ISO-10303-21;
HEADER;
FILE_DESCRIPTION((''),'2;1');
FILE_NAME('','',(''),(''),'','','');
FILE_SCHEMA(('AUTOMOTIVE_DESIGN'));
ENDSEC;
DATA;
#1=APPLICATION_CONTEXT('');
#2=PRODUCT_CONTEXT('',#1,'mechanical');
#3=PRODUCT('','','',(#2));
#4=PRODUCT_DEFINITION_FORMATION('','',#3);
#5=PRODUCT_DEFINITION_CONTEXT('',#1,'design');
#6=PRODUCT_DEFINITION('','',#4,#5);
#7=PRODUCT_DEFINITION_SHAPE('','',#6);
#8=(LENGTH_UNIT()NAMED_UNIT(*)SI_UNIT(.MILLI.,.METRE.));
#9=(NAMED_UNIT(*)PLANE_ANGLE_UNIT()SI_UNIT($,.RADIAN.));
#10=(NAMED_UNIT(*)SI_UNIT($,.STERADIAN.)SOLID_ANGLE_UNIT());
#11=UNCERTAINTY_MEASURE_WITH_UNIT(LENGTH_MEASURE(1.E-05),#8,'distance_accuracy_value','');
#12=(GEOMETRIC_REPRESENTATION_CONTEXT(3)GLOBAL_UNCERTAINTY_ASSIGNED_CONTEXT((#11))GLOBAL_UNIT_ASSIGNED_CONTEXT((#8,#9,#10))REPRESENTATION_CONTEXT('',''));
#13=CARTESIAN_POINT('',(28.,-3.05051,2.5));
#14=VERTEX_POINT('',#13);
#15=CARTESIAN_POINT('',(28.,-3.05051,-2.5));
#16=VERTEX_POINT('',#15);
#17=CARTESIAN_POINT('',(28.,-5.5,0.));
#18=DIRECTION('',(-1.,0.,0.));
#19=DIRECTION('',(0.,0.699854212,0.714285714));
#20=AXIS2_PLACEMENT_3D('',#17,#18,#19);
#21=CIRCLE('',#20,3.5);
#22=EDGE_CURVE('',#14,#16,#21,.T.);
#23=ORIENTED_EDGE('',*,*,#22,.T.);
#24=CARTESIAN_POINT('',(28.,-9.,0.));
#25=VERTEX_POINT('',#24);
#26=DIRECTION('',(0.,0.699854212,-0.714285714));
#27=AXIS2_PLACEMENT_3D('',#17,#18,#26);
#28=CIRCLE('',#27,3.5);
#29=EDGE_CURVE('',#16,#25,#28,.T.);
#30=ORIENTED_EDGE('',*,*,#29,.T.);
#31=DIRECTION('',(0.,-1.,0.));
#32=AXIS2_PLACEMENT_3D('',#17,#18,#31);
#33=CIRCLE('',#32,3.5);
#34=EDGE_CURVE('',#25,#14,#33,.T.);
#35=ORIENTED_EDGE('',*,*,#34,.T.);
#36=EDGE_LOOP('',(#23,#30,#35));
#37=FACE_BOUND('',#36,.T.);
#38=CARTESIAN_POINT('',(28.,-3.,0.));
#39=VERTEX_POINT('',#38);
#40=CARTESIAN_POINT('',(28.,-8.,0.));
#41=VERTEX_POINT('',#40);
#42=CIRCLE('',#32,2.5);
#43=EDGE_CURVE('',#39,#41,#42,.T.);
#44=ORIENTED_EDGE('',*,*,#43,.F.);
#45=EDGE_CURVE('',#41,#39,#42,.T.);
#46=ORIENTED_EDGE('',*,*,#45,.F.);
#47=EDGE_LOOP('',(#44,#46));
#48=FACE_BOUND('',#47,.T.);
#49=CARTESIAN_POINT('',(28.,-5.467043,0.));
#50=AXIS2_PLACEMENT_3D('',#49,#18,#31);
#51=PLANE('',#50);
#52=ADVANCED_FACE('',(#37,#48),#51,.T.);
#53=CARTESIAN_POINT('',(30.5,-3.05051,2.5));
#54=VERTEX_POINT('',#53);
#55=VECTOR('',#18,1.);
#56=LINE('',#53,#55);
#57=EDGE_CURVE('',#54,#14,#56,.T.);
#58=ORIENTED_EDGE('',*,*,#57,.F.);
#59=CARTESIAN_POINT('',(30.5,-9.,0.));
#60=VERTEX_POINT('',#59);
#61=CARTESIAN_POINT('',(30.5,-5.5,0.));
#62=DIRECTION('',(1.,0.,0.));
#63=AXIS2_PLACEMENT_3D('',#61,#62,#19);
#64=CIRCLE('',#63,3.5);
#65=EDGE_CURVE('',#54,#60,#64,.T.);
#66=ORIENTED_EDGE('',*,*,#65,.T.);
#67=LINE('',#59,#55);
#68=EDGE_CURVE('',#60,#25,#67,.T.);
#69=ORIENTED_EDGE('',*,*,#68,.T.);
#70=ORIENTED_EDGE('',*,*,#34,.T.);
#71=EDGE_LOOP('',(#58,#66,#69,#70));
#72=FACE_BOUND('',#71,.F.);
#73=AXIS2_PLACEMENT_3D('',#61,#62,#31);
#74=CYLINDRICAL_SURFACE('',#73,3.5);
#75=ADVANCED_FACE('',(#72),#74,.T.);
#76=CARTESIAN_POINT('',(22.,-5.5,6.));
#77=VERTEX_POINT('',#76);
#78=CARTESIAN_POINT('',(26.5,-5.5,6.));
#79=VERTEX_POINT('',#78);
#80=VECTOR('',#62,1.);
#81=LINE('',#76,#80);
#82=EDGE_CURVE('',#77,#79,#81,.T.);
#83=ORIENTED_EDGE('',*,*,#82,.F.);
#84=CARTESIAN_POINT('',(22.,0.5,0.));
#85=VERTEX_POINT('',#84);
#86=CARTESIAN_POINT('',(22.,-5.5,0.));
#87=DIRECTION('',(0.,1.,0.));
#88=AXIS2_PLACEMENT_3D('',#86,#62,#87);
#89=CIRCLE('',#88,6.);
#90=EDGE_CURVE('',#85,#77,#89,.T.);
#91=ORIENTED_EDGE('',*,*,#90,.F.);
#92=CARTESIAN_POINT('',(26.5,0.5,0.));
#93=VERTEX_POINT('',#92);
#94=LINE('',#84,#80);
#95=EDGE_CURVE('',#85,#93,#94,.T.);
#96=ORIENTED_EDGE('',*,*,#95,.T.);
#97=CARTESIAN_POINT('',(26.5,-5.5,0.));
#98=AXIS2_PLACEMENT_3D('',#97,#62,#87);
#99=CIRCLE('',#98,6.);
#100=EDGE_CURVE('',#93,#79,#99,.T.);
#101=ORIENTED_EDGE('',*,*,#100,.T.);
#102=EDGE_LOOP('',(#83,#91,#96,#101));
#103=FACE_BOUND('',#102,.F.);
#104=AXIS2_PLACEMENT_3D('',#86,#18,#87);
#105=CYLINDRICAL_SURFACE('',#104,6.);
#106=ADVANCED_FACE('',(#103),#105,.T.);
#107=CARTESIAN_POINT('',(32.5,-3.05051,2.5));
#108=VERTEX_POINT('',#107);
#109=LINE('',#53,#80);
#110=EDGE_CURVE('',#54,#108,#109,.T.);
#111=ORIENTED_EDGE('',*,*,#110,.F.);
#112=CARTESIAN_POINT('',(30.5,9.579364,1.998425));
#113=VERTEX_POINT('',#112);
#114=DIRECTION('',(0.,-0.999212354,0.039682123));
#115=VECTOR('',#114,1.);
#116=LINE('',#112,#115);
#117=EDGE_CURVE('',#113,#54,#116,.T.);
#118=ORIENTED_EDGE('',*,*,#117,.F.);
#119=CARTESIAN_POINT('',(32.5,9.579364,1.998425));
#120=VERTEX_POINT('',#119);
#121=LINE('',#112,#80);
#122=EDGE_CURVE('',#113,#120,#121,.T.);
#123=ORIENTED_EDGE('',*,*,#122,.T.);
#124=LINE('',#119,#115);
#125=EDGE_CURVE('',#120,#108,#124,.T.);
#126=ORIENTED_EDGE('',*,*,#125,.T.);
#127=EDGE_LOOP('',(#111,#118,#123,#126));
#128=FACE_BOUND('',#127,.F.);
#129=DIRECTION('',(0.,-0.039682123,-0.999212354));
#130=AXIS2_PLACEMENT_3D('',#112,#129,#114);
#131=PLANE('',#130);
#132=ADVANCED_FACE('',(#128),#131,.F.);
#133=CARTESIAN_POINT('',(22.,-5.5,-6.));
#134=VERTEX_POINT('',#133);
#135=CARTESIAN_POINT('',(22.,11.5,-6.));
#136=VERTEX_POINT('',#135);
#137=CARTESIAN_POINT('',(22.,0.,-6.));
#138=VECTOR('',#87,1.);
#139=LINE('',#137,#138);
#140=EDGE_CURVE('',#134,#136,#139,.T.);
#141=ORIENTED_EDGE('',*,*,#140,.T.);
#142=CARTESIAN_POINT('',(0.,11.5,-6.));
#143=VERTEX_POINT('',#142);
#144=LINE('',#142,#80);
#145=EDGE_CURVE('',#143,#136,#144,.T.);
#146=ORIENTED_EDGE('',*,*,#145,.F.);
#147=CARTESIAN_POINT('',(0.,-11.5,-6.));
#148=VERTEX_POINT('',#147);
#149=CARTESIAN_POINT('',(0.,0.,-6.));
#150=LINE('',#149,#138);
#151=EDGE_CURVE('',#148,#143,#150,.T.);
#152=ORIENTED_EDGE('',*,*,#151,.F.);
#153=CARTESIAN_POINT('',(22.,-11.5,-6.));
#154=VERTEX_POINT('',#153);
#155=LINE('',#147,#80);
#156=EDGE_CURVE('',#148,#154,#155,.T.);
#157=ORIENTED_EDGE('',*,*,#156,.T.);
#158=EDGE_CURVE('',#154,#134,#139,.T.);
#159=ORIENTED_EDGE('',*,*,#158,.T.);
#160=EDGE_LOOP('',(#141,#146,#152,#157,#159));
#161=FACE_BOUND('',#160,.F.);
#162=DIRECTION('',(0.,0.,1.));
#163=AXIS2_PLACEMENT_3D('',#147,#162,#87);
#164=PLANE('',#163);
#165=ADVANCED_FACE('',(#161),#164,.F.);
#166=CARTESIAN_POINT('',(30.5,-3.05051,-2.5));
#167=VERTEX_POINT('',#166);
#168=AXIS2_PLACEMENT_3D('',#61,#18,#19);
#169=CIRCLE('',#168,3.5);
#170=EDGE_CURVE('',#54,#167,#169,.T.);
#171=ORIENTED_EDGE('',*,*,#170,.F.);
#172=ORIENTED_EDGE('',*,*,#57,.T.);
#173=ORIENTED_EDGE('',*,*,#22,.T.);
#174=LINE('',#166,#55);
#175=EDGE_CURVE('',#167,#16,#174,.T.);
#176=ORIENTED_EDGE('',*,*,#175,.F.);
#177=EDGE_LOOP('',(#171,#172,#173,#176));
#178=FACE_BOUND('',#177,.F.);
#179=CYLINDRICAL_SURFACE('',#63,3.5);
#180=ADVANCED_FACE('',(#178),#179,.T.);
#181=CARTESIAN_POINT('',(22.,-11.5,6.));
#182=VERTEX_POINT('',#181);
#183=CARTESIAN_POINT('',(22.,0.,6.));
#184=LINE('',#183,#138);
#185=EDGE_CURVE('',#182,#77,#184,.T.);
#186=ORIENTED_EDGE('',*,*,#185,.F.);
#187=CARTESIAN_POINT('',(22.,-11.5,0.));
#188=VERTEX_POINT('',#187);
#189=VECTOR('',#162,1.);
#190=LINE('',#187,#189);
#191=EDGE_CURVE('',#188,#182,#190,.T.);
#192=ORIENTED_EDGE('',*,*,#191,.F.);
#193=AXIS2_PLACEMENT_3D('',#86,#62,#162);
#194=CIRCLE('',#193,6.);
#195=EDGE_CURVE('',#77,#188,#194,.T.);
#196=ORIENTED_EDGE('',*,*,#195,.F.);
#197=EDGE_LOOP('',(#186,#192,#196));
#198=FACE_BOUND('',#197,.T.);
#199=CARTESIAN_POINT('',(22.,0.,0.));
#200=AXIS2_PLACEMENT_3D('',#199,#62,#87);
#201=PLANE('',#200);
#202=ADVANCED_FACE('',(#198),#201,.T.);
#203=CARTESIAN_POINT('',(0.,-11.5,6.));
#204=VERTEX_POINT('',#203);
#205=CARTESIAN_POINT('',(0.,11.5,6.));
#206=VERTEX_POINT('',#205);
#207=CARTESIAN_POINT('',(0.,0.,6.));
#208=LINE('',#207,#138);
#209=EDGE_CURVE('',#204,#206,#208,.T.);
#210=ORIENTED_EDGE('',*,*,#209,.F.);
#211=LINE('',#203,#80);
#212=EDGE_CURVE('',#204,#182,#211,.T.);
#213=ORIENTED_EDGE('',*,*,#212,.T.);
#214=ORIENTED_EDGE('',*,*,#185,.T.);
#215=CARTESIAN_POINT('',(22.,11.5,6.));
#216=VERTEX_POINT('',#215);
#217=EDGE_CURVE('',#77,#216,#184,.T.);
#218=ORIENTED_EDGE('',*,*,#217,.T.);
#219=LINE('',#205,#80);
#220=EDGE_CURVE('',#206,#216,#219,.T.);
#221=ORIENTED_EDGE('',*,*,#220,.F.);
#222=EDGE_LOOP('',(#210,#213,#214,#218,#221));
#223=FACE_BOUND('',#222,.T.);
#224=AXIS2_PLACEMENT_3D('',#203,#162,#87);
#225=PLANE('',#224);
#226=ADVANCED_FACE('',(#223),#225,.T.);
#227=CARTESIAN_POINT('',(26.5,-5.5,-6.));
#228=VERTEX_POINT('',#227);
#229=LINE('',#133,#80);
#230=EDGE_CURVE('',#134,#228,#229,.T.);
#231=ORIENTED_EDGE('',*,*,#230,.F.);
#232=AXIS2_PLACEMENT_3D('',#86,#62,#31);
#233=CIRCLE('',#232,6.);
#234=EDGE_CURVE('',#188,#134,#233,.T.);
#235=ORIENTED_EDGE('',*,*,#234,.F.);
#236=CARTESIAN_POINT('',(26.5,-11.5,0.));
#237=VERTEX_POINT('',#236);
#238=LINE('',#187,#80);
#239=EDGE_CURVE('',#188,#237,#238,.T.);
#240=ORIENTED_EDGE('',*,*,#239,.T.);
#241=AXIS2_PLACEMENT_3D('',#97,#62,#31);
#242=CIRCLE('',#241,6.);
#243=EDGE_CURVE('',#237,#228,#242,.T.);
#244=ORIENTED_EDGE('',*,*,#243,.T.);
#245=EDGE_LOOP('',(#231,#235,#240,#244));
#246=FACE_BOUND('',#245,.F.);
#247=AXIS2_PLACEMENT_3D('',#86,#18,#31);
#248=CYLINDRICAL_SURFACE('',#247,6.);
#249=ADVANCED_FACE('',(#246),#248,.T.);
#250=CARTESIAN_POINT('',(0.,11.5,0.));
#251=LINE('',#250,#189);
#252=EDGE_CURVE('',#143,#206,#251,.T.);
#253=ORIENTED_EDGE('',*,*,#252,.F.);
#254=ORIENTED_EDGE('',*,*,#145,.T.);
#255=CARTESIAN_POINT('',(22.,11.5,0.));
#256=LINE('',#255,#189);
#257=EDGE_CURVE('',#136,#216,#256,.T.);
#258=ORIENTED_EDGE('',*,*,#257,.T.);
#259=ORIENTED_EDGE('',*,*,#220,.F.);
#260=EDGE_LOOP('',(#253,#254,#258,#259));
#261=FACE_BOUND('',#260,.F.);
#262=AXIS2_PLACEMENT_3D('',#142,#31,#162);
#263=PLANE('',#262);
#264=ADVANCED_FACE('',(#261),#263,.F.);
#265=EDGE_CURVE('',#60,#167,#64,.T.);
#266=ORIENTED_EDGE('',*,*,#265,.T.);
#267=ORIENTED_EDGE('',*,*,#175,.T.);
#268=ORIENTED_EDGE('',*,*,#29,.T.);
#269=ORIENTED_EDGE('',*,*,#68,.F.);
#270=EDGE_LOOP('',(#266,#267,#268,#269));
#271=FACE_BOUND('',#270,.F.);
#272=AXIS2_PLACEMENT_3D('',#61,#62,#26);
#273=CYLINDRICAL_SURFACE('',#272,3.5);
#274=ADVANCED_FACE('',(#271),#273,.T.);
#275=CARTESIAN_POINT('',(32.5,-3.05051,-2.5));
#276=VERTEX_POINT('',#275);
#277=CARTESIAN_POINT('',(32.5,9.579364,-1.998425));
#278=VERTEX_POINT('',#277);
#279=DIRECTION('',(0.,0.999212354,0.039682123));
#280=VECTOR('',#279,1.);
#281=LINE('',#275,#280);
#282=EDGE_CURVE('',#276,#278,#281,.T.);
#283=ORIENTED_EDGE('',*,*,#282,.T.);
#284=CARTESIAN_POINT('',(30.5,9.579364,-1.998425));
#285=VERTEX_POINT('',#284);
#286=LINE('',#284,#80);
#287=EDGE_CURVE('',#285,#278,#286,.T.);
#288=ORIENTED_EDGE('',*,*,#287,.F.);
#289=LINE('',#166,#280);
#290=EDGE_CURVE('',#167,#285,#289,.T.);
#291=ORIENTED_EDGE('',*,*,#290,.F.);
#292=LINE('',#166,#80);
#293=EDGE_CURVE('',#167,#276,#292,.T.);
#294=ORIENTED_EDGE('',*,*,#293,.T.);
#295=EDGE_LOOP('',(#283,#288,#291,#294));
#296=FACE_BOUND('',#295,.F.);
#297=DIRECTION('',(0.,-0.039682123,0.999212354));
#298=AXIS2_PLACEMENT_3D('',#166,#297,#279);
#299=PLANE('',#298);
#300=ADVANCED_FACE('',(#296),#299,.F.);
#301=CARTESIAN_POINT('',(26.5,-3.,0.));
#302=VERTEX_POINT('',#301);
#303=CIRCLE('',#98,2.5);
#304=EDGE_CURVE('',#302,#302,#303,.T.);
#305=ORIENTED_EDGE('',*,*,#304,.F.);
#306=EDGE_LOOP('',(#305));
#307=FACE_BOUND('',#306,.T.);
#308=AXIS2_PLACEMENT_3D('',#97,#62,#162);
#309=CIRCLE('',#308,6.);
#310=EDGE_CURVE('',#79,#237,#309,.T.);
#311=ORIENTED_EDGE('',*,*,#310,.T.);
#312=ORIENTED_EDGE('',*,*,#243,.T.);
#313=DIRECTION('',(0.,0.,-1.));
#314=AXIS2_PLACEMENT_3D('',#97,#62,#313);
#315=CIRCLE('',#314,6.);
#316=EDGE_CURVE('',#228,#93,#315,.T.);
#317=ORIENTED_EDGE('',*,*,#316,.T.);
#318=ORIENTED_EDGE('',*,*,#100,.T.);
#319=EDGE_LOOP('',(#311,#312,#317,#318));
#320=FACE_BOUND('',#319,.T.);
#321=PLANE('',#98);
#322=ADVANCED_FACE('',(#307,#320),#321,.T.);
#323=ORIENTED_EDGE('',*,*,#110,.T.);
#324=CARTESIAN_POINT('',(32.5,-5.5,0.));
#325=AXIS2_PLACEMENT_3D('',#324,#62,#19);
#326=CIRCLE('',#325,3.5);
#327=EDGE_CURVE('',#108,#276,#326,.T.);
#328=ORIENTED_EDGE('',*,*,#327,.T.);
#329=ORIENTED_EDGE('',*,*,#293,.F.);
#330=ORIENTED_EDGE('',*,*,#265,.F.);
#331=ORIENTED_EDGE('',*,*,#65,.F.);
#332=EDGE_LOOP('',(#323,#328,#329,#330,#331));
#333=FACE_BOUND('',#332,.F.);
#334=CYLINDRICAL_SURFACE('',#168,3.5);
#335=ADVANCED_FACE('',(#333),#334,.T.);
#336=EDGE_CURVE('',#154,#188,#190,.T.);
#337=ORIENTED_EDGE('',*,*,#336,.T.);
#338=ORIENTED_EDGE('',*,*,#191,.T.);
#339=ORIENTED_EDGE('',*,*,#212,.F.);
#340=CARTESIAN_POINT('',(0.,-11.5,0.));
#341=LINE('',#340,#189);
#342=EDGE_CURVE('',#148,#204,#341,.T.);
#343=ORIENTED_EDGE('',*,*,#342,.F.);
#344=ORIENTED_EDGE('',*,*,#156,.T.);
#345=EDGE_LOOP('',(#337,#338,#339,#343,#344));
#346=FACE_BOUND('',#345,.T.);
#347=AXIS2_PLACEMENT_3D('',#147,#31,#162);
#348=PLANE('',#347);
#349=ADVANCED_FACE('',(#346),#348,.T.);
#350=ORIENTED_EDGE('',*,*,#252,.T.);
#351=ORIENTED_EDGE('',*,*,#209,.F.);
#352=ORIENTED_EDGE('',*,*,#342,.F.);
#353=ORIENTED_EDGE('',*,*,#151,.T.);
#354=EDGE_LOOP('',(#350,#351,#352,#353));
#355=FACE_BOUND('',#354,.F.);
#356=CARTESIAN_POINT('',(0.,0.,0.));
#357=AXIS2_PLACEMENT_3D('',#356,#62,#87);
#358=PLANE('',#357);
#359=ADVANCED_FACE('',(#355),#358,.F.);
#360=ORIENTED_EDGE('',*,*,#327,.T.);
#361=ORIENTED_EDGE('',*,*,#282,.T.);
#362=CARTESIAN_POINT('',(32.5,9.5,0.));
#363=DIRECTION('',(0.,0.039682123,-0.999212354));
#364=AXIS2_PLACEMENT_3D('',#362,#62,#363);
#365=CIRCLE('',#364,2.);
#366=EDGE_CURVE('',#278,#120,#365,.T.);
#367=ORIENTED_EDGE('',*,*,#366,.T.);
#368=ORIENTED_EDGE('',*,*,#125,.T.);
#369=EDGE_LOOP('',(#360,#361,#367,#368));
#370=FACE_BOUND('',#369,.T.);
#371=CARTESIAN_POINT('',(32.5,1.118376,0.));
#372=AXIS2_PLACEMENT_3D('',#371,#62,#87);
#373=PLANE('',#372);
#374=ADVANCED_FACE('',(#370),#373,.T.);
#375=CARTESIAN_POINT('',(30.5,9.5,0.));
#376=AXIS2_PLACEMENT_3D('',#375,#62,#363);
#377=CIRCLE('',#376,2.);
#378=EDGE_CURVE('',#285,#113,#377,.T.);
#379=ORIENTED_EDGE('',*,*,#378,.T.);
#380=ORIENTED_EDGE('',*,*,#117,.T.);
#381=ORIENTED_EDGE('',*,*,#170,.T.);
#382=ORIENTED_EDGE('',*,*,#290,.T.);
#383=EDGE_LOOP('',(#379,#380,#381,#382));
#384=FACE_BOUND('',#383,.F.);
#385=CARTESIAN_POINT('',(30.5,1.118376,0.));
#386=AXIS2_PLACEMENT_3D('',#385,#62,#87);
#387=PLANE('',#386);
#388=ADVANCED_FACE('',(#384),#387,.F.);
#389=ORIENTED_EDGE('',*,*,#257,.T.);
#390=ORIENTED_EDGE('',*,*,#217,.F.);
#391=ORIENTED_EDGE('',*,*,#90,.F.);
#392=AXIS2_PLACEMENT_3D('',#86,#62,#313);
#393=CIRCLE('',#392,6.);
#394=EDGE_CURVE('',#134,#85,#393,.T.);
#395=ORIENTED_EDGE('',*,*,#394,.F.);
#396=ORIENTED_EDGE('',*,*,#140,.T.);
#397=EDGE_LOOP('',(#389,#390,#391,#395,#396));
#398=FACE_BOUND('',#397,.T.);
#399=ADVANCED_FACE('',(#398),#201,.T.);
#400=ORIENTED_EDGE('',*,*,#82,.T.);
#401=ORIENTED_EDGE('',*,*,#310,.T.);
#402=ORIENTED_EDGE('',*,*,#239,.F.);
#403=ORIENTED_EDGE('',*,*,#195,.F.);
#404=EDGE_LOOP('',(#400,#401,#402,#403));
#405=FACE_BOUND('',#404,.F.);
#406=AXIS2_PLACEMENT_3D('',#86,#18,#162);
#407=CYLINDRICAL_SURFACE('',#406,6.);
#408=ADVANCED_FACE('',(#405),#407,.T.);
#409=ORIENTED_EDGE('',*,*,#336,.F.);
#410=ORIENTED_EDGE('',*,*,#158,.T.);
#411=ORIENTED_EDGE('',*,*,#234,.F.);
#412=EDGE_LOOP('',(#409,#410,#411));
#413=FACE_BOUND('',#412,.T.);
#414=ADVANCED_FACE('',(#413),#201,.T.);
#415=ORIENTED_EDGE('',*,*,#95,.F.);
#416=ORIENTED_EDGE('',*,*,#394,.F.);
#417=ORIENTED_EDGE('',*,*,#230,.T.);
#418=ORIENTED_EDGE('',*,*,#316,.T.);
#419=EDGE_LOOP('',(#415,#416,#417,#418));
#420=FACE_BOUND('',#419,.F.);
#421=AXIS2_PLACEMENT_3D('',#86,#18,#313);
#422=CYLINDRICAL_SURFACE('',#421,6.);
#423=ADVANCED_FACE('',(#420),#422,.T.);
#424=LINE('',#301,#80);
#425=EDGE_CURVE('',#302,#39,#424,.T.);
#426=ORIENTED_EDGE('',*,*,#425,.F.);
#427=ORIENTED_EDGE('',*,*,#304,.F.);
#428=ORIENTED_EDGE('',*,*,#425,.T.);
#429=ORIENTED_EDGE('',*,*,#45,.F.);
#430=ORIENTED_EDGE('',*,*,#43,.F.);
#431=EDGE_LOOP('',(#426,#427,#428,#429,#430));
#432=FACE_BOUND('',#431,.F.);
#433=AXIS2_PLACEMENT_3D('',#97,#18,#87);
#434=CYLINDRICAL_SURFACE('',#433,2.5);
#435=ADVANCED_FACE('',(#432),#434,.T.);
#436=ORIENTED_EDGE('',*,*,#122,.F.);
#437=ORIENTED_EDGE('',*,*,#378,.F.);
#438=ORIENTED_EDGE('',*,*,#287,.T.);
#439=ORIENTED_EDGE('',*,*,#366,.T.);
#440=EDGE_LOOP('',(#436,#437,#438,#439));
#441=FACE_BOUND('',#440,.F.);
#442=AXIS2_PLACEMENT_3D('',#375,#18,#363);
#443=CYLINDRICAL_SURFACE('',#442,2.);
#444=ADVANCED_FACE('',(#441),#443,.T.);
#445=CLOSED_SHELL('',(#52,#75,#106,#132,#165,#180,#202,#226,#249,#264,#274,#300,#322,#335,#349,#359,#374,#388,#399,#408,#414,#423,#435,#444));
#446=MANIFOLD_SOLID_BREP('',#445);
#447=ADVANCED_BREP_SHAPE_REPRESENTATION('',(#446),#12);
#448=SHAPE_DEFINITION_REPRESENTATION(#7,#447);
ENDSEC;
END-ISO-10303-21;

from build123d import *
from build123d import SkipClean  # not in build123d's __all__

# Parameters (mm, degrees)
F0_W     = 23
F0_H     = 12
F1_DEPTH = 22
F3_DEPTH = 4.5
F4_R     = 2.5
F5_DEPTH = 4
F6_R     = 2.5
F7_DEPTH = 2
F8_R     = 2.5
F9_DEPTH = 2.5


with BuildPart() as f1:
    # F0 (on Right) → F1 (new body)
    with BuildSketch(Plane.YZ):
        Rectangle(F0_W, F0_H)
    extrude(amount=F1_DEPTH)

    # F2 (on face) → F3 (join)
    with BuildSketch(Plane.YZ.offset(22)):
        with BuildLine():
            ThreePointArc((-5.5, -6), (-1.2573593129, -4.2426406871), (0.5, 0))
            ThreePointArc((0.5, 0), (-1.2573593129, 4.2426406871), (-5.5, 6))
            ThreePointArc((-5.5, 6), (-9.7426406871, 4.2426406871), (-11.5, 0))
            ThreePointArc((-11.5, 0), (-9.7426406871, -4.2426406871), (-5.5, -6))
        make_face()
    extrude(amount=F3_DEPTH)

    # F4 (on face) → F5 (join)
    with BuildSketch(Plane.YZ.offset(26.5)):
        with Locations((-5.5, 0)):
            Circle(F4_R)
    extrude(amount=F5_DEPTH)

    # F6 (on face) → F7 (join)
    with BuildSketch(Plane.YZ.offset(30.5)):
        with BuildLine():
            Line((-3.0505102572, -2.5), (9.5793642451, -1.9984247088))
            ThreePointArc((9.5793642451, -1.9984247088), (11.5, 0), (9.5793642451, 1.9984247088))
            Line((9.5793642451, 1.9984247088), (-3.0505102572, 2.5))
            ThreePointArc((-3.0505102572, 2.5), (-9, 0), (-3.0505102572, -2.5))
        make_face()
        with Locations((-5.5, 0)):
            Circle(F6_R, mode=Mode.SUBTRACT)
        with Locations((-5.5, 0)):
            Circle(F6_R)
    extrude(amount=F7_DEPTH)

    # F8 (on face) → F9 (join)
    with BuildSketch(Plane(origin=(30.5, 0, 0), x_dir=(0, -1, 0), z_dir=(-1, 0, 0))):
        with BuildLine():
            ThreePointArc((3.0505102572, -2.5), (6.8558735008, -3.2267021942), (9, 0))
            ThreePointArc((9, 0), (6.8558735008, 3.2267021942), (3.0505102572, 2.5))
            ThreePointArc((3.0505102572, 2.5), (2, 0), (3.0505102572, -2.5))
        make_face()
        with Locations((5.5, 0)):
            Circle(F8_R, mode=Mode.SUBTRACT)
    with SkipClean():  # cleaning this boolean's faces spoils the solid; the shape is the same uncleaned
        extrude(amount=F9_DEPTH)


solid = f1.part
